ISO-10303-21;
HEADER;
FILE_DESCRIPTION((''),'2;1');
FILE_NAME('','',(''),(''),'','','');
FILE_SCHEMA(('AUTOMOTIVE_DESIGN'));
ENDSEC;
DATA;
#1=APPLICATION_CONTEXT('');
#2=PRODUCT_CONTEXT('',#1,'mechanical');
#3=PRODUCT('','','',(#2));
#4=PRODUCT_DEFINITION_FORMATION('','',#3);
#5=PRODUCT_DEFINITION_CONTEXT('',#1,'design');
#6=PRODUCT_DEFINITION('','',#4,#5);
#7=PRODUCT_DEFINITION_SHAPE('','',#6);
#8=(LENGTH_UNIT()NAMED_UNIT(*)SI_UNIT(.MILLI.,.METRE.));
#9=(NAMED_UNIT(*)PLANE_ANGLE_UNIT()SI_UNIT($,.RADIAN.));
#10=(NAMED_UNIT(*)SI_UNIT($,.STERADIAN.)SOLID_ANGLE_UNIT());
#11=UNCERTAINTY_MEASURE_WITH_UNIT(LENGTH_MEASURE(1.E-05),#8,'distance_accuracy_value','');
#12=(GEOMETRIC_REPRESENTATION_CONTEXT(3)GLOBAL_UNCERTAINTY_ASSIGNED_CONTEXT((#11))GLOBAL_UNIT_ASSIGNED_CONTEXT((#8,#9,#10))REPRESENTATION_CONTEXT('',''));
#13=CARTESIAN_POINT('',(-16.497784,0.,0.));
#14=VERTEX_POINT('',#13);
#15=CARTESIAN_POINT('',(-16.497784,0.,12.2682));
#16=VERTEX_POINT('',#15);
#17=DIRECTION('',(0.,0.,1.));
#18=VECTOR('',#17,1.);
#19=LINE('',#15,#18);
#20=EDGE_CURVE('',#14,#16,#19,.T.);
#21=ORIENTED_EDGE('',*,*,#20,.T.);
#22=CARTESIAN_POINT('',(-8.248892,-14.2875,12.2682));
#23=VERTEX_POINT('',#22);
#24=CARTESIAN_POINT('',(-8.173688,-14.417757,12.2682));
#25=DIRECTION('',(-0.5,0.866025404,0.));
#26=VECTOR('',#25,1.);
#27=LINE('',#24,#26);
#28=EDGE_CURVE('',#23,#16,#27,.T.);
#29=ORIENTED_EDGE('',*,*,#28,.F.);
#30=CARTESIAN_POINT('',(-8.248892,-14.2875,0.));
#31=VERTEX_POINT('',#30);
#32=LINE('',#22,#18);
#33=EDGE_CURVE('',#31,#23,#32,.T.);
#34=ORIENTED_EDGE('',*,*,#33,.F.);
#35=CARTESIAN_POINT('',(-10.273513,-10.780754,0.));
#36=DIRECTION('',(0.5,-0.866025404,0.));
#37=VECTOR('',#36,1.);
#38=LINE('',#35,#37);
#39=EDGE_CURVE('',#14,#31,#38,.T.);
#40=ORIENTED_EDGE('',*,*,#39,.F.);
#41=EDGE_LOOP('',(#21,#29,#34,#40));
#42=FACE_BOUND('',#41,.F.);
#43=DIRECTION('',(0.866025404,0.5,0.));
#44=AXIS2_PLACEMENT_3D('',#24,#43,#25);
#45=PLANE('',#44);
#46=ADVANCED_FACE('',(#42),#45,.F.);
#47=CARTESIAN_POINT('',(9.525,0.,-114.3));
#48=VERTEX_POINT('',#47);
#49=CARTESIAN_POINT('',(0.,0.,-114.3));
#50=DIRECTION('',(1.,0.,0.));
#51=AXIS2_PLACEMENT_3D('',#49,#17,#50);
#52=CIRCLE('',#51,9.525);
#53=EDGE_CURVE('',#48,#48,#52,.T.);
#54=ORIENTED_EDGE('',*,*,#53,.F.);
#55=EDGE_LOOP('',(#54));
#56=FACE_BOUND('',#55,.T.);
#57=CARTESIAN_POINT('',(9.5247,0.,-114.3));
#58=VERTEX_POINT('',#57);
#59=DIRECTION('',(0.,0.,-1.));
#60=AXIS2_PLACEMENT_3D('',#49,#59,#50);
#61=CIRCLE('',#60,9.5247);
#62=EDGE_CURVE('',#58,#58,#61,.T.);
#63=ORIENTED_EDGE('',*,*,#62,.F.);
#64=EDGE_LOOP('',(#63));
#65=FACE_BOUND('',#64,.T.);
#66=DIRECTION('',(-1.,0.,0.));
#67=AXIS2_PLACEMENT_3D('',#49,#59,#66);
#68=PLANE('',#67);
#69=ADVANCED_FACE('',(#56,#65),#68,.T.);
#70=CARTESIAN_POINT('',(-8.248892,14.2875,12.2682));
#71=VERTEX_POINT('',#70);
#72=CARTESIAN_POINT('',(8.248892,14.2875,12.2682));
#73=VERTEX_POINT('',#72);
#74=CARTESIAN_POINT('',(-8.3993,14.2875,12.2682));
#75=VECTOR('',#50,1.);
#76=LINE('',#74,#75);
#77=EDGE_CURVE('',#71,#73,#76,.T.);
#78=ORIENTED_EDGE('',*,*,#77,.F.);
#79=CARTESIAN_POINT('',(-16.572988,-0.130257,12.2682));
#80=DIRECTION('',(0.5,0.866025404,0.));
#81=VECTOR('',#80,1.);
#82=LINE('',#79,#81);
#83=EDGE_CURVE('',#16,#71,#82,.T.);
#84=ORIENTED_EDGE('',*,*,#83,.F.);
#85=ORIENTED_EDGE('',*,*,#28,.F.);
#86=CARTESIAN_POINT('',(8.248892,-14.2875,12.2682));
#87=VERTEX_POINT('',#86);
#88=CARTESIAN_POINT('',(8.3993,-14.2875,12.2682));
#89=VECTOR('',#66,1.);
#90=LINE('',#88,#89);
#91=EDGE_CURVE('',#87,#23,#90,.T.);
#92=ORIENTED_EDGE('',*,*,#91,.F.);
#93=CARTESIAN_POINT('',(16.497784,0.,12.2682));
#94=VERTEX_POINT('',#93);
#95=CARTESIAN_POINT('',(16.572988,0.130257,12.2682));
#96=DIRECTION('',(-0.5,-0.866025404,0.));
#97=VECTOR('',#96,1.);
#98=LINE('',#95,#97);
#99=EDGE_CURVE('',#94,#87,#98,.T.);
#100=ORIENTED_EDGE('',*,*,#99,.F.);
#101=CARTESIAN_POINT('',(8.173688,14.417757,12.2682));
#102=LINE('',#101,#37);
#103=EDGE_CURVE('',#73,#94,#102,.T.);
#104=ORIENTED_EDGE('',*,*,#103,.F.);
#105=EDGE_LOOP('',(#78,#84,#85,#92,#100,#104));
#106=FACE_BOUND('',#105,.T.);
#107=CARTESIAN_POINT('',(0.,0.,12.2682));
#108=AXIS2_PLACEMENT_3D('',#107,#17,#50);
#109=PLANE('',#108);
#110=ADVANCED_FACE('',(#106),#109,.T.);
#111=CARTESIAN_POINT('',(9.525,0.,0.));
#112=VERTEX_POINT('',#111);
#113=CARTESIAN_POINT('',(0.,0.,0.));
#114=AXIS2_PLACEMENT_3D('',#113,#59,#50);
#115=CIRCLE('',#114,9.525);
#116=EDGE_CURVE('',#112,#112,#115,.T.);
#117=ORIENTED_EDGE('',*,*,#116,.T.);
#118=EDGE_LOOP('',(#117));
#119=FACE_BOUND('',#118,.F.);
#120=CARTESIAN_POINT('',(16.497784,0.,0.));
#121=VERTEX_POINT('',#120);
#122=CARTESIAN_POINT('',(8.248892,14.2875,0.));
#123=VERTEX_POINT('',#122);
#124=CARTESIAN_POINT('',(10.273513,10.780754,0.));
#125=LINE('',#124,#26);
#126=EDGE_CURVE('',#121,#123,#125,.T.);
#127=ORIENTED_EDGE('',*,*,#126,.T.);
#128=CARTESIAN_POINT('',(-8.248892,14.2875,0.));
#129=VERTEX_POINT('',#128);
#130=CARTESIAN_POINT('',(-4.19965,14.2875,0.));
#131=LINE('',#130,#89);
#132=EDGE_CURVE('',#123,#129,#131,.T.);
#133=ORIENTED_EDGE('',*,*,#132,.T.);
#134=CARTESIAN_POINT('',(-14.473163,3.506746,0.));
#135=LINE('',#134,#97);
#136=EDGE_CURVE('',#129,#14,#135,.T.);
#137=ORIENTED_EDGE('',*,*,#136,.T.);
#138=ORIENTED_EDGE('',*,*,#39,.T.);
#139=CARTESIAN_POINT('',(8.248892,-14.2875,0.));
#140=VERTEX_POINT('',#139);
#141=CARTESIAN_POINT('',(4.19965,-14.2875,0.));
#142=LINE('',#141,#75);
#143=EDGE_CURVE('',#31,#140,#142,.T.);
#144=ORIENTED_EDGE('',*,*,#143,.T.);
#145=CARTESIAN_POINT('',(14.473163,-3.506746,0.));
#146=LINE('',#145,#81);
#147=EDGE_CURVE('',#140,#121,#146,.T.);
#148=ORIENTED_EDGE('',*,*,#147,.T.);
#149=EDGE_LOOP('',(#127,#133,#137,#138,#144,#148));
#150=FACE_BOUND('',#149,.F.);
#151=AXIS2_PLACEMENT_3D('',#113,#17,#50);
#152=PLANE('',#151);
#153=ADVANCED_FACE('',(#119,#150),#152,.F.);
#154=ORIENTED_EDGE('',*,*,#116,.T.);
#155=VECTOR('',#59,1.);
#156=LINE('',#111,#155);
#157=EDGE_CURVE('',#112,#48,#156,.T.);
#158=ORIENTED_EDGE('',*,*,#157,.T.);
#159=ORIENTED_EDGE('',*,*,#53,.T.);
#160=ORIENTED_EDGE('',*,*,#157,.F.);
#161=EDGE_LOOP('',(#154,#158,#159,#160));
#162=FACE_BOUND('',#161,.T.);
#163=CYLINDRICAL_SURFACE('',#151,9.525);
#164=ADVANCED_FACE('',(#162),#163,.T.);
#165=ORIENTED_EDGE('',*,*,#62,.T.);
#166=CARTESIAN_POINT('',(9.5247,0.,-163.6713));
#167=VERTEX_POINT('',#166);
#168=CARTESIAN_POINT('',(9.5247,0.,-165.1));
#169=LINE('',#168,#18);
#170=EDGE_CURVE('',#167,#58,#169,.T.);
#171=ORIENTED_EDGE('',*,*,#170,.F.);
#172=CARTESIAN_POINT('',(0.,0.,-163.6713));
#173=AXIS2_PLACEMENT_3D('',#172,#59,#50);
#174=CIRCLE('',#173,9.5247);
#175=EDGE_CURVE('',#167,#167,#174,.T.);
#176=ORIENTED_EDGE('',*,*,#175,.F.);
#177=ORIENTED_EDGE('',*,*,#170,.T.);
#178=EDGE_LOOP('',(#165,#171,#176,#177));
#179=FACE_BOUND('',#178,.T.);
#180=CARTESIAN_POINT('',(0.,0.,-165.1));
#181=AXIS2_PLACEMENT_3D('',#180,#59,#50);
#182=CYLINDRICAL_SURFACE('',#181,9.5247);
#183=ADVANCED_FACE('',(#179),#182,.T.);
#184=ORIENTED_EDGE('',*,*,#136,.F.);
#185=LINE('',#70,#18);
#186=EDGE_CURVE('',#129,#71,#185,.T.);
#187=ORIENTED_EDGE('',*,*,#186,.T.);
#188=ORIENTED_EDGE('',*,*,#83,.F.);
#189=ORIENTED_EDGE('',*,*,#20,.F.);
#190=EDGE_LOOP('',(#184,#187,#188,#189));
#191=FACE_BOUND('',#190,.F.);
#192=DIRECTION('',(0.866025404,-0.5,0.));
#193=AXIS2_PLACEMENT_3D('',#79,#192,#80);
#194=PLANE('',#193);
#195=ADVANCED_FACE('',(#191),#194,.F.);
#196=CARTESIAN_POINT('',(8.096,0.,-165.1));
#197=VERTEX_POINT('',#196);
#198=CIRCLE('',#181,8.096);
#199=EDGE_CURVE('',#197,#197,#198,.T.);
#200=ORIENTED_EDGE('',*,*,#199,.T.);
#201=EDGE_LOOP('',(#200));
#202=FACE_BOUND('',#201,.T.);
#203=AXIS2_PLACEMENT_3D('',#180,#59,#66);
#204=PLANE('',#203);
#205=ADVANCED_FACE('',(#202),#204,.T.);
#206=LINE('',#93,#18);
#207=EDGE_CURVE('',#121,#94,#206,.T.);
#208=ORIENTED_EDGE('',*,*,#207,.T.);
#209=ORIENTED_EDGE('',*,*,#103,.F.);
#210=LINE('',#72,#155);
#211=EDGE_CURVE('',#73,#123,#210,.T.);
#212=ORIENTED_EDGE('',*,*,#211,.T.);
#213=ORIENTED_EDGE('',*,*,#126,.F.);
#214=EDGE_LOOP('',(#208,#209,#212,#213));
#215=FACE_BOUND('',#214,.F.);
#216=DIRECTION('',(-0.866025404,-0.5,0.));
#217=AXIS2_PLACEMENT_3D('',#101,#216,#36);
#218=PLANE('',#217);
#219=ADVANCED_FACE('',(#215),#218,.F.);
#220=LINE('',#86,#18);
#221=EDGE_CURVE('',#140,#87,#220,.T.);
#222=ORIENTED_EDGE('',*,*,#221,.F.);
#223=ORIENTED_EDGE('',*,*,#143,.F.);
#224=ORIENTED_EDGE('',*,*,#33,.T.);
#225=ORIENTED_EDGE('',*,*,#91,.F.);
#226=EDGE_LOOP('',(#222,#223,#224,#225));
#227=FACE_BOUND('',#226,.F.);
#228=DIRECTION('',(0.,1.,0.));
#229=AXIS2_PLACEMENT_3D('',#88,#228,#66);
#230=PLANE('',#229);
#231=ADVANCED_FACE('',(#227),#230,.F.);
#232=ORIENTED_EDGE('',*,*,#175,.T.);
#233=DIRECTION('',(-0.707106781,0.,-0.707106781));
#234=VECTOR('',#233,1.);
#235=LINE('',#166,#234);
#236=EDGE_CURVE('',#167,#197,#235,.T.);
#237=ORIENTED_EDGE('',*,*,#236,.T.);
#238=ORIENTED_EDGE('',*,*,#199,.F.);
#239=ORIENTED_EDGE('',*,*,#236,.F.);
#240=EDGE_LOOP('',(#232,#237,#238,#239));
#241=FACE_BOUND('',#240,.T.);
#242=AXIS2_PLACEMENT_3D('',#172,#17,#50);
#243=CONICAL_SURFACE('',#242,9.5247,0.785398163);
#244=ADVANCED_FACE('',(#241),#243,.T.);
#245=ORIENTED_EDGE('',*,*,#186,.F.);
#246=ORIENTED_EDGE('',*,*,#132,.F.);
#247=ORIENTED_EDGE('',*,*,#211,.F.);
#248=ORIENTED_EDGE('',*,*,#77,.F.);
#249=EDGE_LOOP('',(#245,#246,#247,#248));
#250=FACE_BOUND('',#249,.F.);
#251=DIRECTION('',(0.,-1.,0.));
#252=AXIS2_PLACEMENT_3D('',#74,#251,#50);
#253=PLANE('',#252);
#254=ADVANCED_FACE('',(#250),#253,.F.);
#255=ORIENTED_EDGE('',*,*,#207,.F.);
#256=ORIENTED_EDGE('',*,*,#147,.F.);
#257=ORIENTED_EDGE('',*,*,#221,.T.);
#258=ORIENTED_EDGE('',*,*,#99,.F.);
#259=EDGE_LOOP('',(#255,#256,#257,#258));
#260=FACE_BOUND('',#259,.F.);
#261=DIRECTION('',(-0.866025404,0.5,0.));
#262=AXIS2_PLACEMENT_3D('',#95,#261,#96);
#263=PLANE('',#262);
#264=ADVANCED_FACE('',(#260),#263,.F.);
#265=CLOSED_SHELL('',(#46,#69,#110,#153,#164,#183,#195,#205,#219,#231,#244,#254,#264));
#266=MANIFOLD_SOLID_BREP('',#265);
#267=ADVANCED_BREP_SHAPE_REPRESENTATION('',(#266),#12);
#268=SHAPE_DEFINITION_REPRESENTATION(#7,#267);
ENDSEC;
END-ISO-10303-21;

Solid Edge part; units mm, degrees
sketch "Sketch1" plane through (0, 0, 0) normal (0, 0, 1) x (1, 0, 0)
  circle A0 centre (0, 0) radius 16.5735
  dimension "D1" = 33.147
extrude "Protrusion1" add sketch "Sketch1" along normal blind 12.2682
sketch "Sketch2" plane through (0, 0, 0) normal (0, 0, -1) x (1, 0, 0)
  circle A0 centre (0, 0) radius 9.525
extrude "Protrusion2" add sketch "Sketch2" along normal blind 165.1
sketch "Sketch3" plane through (0, 0, -165.1) normal (0, 0, -1) x (1, 0, 0)
  circle A0 centre (0, 0) radius 9.5247
extrude "Cutout1" cut sketch "Sketch3" against normal blind 50.8 flip side to cut
chamfer "Chamfer_1" distance 1.4287 angle 45 1 edges at (-9.5247, 0, -165.1)
sketch "Sketch4" plane through (0, 0, 12.2682) normal (0, 0, 1) x (1, 0, 0)
  line L0 (-8.3993, 14.2875) -> (8.3993, 14.2875)
  dimension "D1" = 28.575
extrude "Cutout2" cut sketch "Sketch4" against normal up to next material side at (0, 14.3375, 12.2682)
pattern_circular "Pattern1" count 6 over 360 about axis through (0, 0, 12.2682) along (0, 0, 1) of "Cutout2"
properties part number "24105052"
